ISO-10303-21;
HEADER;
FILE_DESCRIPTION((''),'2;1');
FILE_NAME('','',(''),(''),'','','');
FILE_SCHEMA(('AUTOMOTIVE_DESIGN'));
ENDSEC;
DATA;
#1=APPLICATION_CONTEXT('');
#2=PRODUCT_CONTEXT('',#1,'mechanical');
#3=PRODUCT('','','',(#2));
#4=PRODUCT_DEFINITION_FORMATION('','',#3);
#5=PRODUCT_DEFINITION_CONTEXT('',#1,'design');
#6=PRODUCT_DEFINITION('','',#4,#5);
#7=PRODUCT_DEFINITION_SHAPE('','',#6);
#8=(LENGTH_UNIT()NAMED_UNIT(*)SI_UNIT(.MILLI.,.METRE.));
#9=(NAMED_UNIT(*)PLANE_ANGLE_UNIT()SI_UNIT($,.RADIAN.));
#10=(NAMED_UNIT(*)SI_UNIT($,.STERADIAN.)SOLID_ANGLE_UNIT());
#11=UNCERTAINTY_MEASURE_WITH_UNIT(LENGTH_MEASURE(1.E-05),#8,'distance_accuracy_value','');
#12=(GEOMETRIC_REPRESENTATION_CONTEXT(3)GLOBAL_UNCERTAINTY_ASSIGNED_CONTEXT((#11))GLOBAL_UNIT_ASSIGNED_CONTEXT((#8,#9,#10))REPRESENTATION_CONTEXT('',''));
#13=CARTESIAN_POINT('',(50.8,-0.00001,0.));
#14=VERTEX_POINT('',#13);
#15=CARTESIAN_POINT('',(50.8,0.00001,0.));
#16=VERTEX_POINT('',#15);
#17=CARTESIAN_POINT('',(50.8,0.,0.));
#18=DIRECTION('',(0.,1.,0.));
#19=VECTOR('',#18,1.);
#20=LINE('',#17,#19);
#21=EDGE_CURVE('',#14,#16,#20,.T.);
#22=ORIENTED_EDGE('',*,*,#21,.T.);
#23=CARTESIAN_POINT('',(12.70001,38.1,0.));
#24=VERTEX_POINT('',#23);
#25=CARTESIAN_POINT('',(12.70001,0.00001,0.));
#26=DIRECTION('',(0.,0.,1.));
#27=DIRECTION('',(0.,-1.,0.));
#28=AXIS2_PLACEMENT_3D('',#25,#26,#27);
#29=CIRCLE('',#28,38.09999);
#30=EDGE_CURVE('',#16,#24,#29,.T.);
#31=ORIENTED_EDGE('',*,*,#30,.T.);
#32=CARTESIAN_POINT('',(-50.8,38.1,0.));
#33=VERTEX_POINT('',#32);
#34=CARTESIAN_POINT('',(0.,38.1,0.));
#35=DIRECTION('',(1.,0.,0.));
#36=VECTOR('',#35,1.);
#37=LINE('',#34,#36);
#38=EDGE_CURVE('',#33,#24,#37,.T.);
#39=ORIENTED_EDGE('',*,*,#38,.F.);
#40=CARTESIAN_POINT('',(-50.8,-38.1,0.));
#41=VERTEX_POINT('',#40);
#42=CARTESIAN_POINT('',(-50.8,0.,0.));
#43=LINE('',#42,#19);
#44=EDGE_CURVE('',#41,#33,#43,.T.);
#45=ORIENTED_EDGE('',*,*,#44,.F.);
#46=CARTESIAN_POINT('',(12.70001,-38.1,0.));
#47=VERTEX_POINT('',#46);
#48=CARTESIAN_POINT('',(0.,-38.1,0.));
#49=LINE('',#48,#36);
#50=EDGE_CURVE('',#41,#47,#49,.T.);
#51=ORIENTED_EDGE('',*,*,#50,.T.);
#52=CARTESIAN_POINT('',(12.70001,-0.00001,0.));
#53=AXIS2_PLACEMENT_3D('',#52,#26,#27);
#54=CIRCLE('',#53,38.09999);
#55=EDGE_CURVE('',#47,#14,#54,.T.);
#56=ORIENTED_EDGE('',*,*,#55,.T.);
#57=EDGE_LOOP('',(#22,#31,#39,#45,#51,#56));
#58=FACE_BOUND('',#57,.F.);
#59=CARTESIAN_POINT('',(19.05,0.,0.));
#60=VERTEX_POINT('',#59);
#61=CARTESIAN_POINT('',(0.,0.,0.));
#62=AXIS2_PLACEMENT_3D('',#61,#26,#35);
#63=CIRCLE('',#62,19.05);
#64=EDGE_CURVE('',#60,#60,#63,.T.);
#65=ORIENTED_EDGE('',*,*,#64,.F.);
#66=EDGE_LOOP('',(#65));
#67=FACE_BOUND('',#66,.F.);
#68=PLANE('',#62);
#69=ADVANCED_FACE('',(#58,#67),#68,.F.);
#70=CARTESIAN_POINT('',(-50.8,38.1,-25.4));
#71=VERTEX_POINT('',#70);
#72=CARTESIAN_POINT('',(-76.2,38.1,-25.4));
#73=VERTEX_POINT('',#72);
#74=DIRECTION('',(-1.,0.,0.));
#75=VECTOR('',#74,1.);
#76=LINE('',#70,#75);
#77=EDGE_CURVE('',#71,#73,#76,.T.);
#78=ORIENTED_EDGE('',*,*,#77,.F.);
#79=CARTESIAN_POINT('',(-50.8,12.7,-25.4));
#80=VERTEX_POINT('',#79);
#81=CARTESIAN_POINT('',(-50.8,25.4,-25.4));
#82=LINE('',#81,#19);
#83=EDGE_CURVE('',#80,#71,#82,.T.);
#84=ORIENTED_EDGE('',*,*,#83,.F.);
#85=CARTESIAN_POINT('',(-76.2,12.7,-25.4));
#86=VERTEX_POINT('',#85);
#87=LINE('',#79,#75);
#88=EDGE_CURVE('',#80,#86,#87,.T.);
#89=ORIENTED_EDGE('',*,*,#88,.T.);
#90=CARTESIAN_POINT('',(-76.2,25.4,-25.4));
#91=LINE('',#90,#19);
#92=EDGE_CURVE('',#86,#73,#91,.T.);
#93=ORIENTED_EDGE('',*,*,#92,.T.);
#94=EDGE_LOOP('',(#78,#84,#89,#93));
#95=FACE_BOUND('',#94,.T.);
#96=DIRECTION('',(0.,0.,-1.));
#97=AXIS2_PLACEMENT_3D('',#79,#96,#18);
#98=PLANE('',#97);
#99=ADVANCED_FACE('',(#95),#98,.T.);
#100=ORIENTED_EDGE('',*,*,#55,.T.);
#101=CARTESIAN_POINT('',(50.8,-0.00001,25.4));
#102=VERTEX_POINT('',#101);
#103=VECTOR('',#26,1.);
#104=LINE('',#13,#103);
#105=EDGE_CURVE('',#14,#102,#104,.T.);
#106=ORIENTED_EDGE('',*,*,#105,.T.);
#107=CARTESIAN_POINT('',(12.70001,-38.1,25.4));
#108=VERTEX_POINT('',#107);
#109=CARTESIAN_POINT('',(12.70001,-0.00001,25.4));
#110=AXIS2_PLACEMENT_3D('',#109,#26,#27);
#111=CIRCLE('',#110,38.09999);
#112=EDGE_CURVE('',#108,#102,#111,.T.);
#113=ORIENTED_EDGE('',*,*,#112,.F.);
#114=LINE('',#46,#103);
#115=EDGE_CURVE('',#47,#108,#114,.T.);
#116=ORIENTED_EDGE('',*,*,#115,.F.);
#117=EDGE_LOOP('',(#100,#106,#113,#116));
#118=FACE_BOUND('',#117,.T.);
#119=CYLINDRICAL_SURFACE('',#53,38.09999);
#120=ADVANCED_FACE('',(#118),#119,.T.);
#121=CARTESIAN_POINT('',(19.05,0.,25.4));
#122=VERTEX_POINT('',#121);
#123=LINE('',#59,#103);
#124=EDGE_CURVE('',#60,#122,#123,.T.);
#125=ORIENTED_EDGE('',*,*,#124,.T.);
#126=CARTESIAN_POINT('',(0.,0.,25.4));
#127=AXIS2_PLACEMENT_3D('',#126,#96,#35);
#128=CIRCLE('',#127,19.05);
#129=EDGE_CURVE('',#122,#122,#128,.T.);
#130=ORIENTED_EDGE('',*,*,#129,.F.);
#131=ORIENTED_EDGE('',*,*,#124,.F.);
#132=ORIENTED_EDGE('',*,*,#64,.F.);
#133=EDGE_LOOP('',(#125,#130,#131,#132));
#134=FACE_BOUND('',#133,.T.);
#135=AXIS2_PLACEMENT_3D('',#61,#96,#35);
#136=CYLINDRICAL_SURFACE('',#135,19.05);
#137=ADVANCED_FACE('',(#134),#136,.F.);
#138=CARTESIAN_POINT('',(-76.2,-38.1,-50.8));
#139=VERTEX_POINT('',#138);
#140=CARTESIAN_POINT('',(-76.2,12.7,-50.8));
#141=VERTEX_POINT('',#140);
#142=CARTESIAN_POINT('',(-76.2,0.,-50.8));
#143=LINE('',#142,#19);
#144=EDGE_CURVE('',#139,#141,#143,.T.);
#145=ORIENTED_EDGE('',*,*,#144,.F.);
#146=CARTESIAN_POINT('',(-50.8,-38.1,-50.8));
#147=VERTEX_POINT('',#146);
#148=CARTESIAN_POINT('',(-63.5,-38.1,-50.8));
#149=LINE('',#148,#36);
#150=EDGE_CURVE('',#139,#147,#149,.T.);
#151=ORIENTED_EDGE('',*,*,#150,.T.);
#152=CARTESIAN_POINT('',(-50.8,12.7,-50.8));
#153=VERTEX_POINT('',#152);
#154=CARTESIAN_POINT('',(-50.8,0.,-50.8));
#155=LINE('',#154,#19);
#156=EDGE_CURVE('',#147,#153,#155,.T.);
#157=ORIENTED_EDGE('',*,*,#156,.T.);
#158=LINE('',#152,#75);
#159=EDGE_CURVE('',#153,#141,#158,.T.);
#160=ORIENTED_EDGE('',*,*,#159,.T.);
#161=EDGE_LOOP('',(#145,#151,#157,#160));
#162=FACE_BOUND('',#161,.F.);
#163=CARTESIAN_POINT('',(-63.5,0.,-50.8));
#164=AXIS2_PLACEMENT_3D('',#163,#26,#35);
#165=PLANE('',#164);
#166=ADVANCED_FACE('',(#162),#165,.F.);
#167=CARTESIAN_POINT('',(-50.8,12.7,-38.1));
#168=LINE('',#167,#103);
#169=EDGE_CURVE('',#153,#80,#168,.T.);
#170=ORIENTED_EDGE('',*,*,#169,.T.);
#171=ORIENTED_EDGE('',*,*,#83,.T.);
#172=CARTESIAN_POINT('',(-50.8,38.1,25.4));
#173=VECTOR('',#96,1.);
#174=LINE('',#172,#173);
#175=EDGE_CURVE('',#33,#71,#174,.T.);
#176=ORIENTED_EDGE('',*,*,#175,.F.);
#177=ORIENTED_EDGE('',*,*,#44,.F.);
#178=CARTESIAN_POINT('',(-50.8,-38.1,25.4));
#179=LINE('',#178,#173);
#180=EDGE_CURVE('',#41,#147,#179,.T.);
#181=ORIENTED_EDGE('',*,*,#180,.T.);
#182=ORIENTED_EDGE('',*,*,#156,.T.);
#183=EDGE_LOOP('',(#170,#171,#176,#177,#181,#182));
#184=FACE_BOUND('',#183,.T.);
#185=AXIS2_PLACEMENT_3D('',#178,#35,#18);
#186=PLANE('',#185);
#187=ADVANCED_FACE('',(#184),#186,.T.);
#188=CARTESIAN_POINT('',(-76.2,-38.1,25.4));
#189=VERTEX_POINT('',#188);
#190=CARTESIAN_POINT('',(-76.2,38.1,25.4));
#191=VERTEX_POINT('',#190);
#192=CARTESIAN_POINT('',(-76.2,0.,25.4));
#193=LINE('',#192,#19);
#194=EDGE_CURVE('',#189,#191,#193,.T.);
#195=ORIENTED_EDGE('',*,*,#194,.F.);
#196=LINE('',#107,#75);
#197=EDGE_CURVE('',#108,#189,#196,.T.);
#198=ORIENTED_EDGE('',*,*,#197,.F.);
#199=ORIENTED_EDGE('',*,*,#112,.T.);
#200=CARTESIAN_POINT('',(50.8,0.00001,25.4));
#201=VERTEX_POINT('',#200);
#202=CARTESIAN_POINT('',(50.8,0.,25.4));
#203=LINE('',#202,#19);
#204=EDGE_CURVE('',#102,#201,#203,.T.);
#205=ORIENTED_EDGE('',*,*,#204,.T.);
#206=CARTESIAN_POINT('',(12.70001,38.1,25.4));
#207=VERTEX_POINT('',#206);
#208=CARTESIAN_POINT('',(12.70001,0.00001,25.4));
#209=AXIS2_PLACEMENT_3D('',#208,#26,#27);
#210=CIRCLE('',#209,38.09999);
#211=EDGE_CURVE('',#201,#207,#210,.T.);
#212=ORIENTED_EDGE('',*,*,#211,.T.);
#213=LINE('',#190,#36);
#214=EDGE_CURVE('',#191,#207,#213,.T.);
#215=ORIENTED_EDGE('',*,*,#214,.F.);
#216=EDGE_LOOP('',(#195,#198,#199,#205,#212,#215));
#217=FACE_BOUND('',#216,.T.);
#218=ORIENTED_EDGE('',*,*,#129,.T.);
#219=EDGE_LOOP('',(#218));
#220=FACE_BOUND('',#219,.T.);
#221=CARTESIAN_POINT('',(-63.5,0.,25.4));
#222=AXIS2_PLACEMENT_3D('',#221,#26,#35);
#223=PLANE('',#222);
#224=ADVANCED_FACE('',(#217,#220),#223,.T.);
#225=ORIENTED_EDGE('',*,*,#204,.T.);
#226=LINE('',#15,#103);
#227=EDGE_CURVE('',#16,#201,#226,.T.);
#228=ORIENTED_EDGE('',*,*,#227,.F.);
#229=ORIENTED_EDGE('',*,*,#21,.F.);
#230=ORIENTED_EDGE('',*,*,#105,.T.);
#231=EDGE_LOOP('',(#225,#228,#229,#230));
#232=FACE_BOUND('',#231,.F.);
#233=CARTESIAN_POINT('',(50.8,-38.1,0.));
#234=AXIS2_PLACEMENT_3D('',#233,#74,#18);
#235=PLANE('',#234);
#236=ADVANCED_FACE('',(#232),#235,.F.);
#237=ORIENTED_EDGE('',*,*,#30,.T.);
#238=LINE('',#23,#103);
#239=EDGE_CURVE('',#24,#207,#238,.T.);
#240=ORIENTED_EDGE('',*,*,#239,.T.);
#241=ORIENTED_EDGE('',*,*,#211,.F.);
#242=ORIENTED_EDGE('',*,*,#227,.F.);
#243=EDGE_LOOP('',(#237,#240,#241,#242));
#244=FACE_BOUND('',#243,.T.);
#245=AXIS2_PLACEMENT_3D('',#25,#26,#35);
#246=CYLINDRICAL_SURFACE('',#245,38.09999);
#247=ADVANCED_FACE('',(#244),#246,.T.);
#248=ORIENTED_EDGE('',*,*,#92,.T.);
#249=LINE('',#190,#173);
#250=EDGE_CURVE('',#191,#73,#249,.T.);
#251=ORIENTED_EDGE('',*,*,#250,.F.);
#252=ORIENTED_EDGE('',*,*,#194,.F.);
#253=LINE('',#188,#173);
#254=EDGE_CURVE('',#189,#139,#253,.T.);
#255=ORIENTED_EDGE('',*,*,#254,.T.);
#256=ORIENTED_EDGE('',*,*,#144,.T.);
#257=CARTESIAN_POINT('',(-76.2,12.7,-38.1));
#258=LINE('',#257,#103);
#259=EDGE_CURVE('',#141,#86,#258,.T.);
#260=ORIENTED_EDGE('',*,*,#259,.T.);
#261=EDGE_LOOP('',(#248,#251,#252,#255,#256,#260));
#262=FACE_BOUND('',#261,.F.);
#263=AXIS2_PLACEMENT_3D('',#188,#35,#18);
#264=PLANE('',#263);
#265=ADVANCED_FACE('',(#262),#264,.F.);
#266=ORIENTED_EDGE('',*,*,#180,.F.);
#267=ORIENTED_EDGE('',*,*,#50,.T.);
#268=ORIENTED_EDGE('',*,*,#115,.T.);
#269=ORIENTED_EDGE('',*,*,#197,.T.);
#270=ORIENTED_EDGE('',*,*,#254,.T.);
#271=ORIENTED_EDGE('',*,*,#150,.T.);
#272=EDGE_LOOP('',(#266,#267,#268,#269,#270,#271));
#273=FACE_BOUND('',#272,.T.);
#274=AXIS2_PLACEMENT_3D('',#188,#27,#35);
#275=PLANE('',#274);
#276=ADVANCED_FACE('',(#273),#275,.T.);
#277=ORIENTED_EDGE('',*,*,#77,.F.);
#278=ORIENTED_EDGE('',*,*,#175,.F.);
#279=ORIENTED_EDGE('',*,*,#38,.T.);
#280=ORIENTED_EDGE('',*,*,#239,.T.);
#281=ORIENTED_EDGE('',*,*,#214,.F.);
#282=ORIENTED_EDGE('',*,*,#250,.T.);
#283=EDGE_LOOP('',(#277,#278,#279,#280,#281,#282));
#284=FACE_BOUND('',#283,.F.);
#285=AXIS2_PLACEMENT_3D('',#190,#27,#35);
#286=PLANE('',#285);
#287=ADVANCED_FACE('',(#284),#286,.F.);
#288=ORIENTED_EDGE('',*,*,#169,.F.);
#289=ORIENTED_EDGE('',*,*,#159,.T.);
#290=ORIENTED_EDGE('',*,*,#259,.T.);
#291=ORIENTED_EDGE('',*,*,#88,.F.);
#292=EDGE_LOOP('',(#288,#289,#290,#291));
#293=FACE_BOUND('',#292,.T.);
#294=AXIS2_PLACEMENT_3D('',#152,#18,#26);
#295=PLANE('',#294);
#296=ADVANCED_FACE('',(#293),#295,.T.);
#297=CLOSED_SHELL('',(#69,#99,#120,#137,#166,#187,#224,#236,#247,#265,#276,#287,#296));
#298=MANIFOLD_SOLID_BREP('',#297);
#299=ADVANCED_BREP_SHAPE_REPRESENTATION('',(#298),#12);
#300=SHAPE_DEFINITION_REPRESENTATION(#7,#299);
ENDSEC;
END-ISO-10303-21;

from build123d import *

# Parameters (mm, degrees)
F0_W     = 101.6
F0_H     = 76.2
F1_DEPTH = 25.4
F2_R     = 38.09999
F3_R     = 19.05
F4_DEPTH = 25.401
F5_W     = 25.4
F5_H     = 76.2
F6_DEPTH = 76.2
F7_W     = 25.4
F7_H     = 25.4
F8_DEPTH = 25.4


# Not quite as in the source:
# - a fillet or chamfer is up to 0.001 mm smaller than in the source, because OpenCascade refuses the exact size


with BuildPart() as f1:
    # F0 (on Top) → F1 (new body)
    with BuildSketch(Plane.XY):
        Rectangle(F0_W, F0_H)
    extrude(amount=F1_DEPTH)

    # F2 (radius 38.1 in the source; OpenCascade refuses exactly that, so slightly less here)
    f2_edges = [f1.edges().sort_by_distance(p)[0] for p in [
        (50.8, -38.1, 12.7),
        (50.8, 38.1, 12.7),
    ]]
    fillet(f2_edges, radius=F2_R)

    # F3 (on Top) → F4 (cut, through all)
    with BuildSketch(Plane.XY):
        Circle(F3_R)
    extrude(amount=F4_DEPTH, mode=Mode.SUBTRACT)

    # F5 (on face) → F6 (join)
    with BuildSketch(Plane.XY.offset(25.4)):
        with Locations((-63.5, 0)):
            Rectangle(F5_W, F5_H)
    extrude(amount=-F6_DEPTH)

    # F7 (on face) → F8 (cut)
    with BuildSketch(Plane.YZ.offset(-50.8)):
        with Locations((25.4, -38.1)):
            Rectangle(F7_W, F7_H)
    extrude(amount=-F8_DEPTH, mode=Mode.SUBTRACT)


solid = f1.part
